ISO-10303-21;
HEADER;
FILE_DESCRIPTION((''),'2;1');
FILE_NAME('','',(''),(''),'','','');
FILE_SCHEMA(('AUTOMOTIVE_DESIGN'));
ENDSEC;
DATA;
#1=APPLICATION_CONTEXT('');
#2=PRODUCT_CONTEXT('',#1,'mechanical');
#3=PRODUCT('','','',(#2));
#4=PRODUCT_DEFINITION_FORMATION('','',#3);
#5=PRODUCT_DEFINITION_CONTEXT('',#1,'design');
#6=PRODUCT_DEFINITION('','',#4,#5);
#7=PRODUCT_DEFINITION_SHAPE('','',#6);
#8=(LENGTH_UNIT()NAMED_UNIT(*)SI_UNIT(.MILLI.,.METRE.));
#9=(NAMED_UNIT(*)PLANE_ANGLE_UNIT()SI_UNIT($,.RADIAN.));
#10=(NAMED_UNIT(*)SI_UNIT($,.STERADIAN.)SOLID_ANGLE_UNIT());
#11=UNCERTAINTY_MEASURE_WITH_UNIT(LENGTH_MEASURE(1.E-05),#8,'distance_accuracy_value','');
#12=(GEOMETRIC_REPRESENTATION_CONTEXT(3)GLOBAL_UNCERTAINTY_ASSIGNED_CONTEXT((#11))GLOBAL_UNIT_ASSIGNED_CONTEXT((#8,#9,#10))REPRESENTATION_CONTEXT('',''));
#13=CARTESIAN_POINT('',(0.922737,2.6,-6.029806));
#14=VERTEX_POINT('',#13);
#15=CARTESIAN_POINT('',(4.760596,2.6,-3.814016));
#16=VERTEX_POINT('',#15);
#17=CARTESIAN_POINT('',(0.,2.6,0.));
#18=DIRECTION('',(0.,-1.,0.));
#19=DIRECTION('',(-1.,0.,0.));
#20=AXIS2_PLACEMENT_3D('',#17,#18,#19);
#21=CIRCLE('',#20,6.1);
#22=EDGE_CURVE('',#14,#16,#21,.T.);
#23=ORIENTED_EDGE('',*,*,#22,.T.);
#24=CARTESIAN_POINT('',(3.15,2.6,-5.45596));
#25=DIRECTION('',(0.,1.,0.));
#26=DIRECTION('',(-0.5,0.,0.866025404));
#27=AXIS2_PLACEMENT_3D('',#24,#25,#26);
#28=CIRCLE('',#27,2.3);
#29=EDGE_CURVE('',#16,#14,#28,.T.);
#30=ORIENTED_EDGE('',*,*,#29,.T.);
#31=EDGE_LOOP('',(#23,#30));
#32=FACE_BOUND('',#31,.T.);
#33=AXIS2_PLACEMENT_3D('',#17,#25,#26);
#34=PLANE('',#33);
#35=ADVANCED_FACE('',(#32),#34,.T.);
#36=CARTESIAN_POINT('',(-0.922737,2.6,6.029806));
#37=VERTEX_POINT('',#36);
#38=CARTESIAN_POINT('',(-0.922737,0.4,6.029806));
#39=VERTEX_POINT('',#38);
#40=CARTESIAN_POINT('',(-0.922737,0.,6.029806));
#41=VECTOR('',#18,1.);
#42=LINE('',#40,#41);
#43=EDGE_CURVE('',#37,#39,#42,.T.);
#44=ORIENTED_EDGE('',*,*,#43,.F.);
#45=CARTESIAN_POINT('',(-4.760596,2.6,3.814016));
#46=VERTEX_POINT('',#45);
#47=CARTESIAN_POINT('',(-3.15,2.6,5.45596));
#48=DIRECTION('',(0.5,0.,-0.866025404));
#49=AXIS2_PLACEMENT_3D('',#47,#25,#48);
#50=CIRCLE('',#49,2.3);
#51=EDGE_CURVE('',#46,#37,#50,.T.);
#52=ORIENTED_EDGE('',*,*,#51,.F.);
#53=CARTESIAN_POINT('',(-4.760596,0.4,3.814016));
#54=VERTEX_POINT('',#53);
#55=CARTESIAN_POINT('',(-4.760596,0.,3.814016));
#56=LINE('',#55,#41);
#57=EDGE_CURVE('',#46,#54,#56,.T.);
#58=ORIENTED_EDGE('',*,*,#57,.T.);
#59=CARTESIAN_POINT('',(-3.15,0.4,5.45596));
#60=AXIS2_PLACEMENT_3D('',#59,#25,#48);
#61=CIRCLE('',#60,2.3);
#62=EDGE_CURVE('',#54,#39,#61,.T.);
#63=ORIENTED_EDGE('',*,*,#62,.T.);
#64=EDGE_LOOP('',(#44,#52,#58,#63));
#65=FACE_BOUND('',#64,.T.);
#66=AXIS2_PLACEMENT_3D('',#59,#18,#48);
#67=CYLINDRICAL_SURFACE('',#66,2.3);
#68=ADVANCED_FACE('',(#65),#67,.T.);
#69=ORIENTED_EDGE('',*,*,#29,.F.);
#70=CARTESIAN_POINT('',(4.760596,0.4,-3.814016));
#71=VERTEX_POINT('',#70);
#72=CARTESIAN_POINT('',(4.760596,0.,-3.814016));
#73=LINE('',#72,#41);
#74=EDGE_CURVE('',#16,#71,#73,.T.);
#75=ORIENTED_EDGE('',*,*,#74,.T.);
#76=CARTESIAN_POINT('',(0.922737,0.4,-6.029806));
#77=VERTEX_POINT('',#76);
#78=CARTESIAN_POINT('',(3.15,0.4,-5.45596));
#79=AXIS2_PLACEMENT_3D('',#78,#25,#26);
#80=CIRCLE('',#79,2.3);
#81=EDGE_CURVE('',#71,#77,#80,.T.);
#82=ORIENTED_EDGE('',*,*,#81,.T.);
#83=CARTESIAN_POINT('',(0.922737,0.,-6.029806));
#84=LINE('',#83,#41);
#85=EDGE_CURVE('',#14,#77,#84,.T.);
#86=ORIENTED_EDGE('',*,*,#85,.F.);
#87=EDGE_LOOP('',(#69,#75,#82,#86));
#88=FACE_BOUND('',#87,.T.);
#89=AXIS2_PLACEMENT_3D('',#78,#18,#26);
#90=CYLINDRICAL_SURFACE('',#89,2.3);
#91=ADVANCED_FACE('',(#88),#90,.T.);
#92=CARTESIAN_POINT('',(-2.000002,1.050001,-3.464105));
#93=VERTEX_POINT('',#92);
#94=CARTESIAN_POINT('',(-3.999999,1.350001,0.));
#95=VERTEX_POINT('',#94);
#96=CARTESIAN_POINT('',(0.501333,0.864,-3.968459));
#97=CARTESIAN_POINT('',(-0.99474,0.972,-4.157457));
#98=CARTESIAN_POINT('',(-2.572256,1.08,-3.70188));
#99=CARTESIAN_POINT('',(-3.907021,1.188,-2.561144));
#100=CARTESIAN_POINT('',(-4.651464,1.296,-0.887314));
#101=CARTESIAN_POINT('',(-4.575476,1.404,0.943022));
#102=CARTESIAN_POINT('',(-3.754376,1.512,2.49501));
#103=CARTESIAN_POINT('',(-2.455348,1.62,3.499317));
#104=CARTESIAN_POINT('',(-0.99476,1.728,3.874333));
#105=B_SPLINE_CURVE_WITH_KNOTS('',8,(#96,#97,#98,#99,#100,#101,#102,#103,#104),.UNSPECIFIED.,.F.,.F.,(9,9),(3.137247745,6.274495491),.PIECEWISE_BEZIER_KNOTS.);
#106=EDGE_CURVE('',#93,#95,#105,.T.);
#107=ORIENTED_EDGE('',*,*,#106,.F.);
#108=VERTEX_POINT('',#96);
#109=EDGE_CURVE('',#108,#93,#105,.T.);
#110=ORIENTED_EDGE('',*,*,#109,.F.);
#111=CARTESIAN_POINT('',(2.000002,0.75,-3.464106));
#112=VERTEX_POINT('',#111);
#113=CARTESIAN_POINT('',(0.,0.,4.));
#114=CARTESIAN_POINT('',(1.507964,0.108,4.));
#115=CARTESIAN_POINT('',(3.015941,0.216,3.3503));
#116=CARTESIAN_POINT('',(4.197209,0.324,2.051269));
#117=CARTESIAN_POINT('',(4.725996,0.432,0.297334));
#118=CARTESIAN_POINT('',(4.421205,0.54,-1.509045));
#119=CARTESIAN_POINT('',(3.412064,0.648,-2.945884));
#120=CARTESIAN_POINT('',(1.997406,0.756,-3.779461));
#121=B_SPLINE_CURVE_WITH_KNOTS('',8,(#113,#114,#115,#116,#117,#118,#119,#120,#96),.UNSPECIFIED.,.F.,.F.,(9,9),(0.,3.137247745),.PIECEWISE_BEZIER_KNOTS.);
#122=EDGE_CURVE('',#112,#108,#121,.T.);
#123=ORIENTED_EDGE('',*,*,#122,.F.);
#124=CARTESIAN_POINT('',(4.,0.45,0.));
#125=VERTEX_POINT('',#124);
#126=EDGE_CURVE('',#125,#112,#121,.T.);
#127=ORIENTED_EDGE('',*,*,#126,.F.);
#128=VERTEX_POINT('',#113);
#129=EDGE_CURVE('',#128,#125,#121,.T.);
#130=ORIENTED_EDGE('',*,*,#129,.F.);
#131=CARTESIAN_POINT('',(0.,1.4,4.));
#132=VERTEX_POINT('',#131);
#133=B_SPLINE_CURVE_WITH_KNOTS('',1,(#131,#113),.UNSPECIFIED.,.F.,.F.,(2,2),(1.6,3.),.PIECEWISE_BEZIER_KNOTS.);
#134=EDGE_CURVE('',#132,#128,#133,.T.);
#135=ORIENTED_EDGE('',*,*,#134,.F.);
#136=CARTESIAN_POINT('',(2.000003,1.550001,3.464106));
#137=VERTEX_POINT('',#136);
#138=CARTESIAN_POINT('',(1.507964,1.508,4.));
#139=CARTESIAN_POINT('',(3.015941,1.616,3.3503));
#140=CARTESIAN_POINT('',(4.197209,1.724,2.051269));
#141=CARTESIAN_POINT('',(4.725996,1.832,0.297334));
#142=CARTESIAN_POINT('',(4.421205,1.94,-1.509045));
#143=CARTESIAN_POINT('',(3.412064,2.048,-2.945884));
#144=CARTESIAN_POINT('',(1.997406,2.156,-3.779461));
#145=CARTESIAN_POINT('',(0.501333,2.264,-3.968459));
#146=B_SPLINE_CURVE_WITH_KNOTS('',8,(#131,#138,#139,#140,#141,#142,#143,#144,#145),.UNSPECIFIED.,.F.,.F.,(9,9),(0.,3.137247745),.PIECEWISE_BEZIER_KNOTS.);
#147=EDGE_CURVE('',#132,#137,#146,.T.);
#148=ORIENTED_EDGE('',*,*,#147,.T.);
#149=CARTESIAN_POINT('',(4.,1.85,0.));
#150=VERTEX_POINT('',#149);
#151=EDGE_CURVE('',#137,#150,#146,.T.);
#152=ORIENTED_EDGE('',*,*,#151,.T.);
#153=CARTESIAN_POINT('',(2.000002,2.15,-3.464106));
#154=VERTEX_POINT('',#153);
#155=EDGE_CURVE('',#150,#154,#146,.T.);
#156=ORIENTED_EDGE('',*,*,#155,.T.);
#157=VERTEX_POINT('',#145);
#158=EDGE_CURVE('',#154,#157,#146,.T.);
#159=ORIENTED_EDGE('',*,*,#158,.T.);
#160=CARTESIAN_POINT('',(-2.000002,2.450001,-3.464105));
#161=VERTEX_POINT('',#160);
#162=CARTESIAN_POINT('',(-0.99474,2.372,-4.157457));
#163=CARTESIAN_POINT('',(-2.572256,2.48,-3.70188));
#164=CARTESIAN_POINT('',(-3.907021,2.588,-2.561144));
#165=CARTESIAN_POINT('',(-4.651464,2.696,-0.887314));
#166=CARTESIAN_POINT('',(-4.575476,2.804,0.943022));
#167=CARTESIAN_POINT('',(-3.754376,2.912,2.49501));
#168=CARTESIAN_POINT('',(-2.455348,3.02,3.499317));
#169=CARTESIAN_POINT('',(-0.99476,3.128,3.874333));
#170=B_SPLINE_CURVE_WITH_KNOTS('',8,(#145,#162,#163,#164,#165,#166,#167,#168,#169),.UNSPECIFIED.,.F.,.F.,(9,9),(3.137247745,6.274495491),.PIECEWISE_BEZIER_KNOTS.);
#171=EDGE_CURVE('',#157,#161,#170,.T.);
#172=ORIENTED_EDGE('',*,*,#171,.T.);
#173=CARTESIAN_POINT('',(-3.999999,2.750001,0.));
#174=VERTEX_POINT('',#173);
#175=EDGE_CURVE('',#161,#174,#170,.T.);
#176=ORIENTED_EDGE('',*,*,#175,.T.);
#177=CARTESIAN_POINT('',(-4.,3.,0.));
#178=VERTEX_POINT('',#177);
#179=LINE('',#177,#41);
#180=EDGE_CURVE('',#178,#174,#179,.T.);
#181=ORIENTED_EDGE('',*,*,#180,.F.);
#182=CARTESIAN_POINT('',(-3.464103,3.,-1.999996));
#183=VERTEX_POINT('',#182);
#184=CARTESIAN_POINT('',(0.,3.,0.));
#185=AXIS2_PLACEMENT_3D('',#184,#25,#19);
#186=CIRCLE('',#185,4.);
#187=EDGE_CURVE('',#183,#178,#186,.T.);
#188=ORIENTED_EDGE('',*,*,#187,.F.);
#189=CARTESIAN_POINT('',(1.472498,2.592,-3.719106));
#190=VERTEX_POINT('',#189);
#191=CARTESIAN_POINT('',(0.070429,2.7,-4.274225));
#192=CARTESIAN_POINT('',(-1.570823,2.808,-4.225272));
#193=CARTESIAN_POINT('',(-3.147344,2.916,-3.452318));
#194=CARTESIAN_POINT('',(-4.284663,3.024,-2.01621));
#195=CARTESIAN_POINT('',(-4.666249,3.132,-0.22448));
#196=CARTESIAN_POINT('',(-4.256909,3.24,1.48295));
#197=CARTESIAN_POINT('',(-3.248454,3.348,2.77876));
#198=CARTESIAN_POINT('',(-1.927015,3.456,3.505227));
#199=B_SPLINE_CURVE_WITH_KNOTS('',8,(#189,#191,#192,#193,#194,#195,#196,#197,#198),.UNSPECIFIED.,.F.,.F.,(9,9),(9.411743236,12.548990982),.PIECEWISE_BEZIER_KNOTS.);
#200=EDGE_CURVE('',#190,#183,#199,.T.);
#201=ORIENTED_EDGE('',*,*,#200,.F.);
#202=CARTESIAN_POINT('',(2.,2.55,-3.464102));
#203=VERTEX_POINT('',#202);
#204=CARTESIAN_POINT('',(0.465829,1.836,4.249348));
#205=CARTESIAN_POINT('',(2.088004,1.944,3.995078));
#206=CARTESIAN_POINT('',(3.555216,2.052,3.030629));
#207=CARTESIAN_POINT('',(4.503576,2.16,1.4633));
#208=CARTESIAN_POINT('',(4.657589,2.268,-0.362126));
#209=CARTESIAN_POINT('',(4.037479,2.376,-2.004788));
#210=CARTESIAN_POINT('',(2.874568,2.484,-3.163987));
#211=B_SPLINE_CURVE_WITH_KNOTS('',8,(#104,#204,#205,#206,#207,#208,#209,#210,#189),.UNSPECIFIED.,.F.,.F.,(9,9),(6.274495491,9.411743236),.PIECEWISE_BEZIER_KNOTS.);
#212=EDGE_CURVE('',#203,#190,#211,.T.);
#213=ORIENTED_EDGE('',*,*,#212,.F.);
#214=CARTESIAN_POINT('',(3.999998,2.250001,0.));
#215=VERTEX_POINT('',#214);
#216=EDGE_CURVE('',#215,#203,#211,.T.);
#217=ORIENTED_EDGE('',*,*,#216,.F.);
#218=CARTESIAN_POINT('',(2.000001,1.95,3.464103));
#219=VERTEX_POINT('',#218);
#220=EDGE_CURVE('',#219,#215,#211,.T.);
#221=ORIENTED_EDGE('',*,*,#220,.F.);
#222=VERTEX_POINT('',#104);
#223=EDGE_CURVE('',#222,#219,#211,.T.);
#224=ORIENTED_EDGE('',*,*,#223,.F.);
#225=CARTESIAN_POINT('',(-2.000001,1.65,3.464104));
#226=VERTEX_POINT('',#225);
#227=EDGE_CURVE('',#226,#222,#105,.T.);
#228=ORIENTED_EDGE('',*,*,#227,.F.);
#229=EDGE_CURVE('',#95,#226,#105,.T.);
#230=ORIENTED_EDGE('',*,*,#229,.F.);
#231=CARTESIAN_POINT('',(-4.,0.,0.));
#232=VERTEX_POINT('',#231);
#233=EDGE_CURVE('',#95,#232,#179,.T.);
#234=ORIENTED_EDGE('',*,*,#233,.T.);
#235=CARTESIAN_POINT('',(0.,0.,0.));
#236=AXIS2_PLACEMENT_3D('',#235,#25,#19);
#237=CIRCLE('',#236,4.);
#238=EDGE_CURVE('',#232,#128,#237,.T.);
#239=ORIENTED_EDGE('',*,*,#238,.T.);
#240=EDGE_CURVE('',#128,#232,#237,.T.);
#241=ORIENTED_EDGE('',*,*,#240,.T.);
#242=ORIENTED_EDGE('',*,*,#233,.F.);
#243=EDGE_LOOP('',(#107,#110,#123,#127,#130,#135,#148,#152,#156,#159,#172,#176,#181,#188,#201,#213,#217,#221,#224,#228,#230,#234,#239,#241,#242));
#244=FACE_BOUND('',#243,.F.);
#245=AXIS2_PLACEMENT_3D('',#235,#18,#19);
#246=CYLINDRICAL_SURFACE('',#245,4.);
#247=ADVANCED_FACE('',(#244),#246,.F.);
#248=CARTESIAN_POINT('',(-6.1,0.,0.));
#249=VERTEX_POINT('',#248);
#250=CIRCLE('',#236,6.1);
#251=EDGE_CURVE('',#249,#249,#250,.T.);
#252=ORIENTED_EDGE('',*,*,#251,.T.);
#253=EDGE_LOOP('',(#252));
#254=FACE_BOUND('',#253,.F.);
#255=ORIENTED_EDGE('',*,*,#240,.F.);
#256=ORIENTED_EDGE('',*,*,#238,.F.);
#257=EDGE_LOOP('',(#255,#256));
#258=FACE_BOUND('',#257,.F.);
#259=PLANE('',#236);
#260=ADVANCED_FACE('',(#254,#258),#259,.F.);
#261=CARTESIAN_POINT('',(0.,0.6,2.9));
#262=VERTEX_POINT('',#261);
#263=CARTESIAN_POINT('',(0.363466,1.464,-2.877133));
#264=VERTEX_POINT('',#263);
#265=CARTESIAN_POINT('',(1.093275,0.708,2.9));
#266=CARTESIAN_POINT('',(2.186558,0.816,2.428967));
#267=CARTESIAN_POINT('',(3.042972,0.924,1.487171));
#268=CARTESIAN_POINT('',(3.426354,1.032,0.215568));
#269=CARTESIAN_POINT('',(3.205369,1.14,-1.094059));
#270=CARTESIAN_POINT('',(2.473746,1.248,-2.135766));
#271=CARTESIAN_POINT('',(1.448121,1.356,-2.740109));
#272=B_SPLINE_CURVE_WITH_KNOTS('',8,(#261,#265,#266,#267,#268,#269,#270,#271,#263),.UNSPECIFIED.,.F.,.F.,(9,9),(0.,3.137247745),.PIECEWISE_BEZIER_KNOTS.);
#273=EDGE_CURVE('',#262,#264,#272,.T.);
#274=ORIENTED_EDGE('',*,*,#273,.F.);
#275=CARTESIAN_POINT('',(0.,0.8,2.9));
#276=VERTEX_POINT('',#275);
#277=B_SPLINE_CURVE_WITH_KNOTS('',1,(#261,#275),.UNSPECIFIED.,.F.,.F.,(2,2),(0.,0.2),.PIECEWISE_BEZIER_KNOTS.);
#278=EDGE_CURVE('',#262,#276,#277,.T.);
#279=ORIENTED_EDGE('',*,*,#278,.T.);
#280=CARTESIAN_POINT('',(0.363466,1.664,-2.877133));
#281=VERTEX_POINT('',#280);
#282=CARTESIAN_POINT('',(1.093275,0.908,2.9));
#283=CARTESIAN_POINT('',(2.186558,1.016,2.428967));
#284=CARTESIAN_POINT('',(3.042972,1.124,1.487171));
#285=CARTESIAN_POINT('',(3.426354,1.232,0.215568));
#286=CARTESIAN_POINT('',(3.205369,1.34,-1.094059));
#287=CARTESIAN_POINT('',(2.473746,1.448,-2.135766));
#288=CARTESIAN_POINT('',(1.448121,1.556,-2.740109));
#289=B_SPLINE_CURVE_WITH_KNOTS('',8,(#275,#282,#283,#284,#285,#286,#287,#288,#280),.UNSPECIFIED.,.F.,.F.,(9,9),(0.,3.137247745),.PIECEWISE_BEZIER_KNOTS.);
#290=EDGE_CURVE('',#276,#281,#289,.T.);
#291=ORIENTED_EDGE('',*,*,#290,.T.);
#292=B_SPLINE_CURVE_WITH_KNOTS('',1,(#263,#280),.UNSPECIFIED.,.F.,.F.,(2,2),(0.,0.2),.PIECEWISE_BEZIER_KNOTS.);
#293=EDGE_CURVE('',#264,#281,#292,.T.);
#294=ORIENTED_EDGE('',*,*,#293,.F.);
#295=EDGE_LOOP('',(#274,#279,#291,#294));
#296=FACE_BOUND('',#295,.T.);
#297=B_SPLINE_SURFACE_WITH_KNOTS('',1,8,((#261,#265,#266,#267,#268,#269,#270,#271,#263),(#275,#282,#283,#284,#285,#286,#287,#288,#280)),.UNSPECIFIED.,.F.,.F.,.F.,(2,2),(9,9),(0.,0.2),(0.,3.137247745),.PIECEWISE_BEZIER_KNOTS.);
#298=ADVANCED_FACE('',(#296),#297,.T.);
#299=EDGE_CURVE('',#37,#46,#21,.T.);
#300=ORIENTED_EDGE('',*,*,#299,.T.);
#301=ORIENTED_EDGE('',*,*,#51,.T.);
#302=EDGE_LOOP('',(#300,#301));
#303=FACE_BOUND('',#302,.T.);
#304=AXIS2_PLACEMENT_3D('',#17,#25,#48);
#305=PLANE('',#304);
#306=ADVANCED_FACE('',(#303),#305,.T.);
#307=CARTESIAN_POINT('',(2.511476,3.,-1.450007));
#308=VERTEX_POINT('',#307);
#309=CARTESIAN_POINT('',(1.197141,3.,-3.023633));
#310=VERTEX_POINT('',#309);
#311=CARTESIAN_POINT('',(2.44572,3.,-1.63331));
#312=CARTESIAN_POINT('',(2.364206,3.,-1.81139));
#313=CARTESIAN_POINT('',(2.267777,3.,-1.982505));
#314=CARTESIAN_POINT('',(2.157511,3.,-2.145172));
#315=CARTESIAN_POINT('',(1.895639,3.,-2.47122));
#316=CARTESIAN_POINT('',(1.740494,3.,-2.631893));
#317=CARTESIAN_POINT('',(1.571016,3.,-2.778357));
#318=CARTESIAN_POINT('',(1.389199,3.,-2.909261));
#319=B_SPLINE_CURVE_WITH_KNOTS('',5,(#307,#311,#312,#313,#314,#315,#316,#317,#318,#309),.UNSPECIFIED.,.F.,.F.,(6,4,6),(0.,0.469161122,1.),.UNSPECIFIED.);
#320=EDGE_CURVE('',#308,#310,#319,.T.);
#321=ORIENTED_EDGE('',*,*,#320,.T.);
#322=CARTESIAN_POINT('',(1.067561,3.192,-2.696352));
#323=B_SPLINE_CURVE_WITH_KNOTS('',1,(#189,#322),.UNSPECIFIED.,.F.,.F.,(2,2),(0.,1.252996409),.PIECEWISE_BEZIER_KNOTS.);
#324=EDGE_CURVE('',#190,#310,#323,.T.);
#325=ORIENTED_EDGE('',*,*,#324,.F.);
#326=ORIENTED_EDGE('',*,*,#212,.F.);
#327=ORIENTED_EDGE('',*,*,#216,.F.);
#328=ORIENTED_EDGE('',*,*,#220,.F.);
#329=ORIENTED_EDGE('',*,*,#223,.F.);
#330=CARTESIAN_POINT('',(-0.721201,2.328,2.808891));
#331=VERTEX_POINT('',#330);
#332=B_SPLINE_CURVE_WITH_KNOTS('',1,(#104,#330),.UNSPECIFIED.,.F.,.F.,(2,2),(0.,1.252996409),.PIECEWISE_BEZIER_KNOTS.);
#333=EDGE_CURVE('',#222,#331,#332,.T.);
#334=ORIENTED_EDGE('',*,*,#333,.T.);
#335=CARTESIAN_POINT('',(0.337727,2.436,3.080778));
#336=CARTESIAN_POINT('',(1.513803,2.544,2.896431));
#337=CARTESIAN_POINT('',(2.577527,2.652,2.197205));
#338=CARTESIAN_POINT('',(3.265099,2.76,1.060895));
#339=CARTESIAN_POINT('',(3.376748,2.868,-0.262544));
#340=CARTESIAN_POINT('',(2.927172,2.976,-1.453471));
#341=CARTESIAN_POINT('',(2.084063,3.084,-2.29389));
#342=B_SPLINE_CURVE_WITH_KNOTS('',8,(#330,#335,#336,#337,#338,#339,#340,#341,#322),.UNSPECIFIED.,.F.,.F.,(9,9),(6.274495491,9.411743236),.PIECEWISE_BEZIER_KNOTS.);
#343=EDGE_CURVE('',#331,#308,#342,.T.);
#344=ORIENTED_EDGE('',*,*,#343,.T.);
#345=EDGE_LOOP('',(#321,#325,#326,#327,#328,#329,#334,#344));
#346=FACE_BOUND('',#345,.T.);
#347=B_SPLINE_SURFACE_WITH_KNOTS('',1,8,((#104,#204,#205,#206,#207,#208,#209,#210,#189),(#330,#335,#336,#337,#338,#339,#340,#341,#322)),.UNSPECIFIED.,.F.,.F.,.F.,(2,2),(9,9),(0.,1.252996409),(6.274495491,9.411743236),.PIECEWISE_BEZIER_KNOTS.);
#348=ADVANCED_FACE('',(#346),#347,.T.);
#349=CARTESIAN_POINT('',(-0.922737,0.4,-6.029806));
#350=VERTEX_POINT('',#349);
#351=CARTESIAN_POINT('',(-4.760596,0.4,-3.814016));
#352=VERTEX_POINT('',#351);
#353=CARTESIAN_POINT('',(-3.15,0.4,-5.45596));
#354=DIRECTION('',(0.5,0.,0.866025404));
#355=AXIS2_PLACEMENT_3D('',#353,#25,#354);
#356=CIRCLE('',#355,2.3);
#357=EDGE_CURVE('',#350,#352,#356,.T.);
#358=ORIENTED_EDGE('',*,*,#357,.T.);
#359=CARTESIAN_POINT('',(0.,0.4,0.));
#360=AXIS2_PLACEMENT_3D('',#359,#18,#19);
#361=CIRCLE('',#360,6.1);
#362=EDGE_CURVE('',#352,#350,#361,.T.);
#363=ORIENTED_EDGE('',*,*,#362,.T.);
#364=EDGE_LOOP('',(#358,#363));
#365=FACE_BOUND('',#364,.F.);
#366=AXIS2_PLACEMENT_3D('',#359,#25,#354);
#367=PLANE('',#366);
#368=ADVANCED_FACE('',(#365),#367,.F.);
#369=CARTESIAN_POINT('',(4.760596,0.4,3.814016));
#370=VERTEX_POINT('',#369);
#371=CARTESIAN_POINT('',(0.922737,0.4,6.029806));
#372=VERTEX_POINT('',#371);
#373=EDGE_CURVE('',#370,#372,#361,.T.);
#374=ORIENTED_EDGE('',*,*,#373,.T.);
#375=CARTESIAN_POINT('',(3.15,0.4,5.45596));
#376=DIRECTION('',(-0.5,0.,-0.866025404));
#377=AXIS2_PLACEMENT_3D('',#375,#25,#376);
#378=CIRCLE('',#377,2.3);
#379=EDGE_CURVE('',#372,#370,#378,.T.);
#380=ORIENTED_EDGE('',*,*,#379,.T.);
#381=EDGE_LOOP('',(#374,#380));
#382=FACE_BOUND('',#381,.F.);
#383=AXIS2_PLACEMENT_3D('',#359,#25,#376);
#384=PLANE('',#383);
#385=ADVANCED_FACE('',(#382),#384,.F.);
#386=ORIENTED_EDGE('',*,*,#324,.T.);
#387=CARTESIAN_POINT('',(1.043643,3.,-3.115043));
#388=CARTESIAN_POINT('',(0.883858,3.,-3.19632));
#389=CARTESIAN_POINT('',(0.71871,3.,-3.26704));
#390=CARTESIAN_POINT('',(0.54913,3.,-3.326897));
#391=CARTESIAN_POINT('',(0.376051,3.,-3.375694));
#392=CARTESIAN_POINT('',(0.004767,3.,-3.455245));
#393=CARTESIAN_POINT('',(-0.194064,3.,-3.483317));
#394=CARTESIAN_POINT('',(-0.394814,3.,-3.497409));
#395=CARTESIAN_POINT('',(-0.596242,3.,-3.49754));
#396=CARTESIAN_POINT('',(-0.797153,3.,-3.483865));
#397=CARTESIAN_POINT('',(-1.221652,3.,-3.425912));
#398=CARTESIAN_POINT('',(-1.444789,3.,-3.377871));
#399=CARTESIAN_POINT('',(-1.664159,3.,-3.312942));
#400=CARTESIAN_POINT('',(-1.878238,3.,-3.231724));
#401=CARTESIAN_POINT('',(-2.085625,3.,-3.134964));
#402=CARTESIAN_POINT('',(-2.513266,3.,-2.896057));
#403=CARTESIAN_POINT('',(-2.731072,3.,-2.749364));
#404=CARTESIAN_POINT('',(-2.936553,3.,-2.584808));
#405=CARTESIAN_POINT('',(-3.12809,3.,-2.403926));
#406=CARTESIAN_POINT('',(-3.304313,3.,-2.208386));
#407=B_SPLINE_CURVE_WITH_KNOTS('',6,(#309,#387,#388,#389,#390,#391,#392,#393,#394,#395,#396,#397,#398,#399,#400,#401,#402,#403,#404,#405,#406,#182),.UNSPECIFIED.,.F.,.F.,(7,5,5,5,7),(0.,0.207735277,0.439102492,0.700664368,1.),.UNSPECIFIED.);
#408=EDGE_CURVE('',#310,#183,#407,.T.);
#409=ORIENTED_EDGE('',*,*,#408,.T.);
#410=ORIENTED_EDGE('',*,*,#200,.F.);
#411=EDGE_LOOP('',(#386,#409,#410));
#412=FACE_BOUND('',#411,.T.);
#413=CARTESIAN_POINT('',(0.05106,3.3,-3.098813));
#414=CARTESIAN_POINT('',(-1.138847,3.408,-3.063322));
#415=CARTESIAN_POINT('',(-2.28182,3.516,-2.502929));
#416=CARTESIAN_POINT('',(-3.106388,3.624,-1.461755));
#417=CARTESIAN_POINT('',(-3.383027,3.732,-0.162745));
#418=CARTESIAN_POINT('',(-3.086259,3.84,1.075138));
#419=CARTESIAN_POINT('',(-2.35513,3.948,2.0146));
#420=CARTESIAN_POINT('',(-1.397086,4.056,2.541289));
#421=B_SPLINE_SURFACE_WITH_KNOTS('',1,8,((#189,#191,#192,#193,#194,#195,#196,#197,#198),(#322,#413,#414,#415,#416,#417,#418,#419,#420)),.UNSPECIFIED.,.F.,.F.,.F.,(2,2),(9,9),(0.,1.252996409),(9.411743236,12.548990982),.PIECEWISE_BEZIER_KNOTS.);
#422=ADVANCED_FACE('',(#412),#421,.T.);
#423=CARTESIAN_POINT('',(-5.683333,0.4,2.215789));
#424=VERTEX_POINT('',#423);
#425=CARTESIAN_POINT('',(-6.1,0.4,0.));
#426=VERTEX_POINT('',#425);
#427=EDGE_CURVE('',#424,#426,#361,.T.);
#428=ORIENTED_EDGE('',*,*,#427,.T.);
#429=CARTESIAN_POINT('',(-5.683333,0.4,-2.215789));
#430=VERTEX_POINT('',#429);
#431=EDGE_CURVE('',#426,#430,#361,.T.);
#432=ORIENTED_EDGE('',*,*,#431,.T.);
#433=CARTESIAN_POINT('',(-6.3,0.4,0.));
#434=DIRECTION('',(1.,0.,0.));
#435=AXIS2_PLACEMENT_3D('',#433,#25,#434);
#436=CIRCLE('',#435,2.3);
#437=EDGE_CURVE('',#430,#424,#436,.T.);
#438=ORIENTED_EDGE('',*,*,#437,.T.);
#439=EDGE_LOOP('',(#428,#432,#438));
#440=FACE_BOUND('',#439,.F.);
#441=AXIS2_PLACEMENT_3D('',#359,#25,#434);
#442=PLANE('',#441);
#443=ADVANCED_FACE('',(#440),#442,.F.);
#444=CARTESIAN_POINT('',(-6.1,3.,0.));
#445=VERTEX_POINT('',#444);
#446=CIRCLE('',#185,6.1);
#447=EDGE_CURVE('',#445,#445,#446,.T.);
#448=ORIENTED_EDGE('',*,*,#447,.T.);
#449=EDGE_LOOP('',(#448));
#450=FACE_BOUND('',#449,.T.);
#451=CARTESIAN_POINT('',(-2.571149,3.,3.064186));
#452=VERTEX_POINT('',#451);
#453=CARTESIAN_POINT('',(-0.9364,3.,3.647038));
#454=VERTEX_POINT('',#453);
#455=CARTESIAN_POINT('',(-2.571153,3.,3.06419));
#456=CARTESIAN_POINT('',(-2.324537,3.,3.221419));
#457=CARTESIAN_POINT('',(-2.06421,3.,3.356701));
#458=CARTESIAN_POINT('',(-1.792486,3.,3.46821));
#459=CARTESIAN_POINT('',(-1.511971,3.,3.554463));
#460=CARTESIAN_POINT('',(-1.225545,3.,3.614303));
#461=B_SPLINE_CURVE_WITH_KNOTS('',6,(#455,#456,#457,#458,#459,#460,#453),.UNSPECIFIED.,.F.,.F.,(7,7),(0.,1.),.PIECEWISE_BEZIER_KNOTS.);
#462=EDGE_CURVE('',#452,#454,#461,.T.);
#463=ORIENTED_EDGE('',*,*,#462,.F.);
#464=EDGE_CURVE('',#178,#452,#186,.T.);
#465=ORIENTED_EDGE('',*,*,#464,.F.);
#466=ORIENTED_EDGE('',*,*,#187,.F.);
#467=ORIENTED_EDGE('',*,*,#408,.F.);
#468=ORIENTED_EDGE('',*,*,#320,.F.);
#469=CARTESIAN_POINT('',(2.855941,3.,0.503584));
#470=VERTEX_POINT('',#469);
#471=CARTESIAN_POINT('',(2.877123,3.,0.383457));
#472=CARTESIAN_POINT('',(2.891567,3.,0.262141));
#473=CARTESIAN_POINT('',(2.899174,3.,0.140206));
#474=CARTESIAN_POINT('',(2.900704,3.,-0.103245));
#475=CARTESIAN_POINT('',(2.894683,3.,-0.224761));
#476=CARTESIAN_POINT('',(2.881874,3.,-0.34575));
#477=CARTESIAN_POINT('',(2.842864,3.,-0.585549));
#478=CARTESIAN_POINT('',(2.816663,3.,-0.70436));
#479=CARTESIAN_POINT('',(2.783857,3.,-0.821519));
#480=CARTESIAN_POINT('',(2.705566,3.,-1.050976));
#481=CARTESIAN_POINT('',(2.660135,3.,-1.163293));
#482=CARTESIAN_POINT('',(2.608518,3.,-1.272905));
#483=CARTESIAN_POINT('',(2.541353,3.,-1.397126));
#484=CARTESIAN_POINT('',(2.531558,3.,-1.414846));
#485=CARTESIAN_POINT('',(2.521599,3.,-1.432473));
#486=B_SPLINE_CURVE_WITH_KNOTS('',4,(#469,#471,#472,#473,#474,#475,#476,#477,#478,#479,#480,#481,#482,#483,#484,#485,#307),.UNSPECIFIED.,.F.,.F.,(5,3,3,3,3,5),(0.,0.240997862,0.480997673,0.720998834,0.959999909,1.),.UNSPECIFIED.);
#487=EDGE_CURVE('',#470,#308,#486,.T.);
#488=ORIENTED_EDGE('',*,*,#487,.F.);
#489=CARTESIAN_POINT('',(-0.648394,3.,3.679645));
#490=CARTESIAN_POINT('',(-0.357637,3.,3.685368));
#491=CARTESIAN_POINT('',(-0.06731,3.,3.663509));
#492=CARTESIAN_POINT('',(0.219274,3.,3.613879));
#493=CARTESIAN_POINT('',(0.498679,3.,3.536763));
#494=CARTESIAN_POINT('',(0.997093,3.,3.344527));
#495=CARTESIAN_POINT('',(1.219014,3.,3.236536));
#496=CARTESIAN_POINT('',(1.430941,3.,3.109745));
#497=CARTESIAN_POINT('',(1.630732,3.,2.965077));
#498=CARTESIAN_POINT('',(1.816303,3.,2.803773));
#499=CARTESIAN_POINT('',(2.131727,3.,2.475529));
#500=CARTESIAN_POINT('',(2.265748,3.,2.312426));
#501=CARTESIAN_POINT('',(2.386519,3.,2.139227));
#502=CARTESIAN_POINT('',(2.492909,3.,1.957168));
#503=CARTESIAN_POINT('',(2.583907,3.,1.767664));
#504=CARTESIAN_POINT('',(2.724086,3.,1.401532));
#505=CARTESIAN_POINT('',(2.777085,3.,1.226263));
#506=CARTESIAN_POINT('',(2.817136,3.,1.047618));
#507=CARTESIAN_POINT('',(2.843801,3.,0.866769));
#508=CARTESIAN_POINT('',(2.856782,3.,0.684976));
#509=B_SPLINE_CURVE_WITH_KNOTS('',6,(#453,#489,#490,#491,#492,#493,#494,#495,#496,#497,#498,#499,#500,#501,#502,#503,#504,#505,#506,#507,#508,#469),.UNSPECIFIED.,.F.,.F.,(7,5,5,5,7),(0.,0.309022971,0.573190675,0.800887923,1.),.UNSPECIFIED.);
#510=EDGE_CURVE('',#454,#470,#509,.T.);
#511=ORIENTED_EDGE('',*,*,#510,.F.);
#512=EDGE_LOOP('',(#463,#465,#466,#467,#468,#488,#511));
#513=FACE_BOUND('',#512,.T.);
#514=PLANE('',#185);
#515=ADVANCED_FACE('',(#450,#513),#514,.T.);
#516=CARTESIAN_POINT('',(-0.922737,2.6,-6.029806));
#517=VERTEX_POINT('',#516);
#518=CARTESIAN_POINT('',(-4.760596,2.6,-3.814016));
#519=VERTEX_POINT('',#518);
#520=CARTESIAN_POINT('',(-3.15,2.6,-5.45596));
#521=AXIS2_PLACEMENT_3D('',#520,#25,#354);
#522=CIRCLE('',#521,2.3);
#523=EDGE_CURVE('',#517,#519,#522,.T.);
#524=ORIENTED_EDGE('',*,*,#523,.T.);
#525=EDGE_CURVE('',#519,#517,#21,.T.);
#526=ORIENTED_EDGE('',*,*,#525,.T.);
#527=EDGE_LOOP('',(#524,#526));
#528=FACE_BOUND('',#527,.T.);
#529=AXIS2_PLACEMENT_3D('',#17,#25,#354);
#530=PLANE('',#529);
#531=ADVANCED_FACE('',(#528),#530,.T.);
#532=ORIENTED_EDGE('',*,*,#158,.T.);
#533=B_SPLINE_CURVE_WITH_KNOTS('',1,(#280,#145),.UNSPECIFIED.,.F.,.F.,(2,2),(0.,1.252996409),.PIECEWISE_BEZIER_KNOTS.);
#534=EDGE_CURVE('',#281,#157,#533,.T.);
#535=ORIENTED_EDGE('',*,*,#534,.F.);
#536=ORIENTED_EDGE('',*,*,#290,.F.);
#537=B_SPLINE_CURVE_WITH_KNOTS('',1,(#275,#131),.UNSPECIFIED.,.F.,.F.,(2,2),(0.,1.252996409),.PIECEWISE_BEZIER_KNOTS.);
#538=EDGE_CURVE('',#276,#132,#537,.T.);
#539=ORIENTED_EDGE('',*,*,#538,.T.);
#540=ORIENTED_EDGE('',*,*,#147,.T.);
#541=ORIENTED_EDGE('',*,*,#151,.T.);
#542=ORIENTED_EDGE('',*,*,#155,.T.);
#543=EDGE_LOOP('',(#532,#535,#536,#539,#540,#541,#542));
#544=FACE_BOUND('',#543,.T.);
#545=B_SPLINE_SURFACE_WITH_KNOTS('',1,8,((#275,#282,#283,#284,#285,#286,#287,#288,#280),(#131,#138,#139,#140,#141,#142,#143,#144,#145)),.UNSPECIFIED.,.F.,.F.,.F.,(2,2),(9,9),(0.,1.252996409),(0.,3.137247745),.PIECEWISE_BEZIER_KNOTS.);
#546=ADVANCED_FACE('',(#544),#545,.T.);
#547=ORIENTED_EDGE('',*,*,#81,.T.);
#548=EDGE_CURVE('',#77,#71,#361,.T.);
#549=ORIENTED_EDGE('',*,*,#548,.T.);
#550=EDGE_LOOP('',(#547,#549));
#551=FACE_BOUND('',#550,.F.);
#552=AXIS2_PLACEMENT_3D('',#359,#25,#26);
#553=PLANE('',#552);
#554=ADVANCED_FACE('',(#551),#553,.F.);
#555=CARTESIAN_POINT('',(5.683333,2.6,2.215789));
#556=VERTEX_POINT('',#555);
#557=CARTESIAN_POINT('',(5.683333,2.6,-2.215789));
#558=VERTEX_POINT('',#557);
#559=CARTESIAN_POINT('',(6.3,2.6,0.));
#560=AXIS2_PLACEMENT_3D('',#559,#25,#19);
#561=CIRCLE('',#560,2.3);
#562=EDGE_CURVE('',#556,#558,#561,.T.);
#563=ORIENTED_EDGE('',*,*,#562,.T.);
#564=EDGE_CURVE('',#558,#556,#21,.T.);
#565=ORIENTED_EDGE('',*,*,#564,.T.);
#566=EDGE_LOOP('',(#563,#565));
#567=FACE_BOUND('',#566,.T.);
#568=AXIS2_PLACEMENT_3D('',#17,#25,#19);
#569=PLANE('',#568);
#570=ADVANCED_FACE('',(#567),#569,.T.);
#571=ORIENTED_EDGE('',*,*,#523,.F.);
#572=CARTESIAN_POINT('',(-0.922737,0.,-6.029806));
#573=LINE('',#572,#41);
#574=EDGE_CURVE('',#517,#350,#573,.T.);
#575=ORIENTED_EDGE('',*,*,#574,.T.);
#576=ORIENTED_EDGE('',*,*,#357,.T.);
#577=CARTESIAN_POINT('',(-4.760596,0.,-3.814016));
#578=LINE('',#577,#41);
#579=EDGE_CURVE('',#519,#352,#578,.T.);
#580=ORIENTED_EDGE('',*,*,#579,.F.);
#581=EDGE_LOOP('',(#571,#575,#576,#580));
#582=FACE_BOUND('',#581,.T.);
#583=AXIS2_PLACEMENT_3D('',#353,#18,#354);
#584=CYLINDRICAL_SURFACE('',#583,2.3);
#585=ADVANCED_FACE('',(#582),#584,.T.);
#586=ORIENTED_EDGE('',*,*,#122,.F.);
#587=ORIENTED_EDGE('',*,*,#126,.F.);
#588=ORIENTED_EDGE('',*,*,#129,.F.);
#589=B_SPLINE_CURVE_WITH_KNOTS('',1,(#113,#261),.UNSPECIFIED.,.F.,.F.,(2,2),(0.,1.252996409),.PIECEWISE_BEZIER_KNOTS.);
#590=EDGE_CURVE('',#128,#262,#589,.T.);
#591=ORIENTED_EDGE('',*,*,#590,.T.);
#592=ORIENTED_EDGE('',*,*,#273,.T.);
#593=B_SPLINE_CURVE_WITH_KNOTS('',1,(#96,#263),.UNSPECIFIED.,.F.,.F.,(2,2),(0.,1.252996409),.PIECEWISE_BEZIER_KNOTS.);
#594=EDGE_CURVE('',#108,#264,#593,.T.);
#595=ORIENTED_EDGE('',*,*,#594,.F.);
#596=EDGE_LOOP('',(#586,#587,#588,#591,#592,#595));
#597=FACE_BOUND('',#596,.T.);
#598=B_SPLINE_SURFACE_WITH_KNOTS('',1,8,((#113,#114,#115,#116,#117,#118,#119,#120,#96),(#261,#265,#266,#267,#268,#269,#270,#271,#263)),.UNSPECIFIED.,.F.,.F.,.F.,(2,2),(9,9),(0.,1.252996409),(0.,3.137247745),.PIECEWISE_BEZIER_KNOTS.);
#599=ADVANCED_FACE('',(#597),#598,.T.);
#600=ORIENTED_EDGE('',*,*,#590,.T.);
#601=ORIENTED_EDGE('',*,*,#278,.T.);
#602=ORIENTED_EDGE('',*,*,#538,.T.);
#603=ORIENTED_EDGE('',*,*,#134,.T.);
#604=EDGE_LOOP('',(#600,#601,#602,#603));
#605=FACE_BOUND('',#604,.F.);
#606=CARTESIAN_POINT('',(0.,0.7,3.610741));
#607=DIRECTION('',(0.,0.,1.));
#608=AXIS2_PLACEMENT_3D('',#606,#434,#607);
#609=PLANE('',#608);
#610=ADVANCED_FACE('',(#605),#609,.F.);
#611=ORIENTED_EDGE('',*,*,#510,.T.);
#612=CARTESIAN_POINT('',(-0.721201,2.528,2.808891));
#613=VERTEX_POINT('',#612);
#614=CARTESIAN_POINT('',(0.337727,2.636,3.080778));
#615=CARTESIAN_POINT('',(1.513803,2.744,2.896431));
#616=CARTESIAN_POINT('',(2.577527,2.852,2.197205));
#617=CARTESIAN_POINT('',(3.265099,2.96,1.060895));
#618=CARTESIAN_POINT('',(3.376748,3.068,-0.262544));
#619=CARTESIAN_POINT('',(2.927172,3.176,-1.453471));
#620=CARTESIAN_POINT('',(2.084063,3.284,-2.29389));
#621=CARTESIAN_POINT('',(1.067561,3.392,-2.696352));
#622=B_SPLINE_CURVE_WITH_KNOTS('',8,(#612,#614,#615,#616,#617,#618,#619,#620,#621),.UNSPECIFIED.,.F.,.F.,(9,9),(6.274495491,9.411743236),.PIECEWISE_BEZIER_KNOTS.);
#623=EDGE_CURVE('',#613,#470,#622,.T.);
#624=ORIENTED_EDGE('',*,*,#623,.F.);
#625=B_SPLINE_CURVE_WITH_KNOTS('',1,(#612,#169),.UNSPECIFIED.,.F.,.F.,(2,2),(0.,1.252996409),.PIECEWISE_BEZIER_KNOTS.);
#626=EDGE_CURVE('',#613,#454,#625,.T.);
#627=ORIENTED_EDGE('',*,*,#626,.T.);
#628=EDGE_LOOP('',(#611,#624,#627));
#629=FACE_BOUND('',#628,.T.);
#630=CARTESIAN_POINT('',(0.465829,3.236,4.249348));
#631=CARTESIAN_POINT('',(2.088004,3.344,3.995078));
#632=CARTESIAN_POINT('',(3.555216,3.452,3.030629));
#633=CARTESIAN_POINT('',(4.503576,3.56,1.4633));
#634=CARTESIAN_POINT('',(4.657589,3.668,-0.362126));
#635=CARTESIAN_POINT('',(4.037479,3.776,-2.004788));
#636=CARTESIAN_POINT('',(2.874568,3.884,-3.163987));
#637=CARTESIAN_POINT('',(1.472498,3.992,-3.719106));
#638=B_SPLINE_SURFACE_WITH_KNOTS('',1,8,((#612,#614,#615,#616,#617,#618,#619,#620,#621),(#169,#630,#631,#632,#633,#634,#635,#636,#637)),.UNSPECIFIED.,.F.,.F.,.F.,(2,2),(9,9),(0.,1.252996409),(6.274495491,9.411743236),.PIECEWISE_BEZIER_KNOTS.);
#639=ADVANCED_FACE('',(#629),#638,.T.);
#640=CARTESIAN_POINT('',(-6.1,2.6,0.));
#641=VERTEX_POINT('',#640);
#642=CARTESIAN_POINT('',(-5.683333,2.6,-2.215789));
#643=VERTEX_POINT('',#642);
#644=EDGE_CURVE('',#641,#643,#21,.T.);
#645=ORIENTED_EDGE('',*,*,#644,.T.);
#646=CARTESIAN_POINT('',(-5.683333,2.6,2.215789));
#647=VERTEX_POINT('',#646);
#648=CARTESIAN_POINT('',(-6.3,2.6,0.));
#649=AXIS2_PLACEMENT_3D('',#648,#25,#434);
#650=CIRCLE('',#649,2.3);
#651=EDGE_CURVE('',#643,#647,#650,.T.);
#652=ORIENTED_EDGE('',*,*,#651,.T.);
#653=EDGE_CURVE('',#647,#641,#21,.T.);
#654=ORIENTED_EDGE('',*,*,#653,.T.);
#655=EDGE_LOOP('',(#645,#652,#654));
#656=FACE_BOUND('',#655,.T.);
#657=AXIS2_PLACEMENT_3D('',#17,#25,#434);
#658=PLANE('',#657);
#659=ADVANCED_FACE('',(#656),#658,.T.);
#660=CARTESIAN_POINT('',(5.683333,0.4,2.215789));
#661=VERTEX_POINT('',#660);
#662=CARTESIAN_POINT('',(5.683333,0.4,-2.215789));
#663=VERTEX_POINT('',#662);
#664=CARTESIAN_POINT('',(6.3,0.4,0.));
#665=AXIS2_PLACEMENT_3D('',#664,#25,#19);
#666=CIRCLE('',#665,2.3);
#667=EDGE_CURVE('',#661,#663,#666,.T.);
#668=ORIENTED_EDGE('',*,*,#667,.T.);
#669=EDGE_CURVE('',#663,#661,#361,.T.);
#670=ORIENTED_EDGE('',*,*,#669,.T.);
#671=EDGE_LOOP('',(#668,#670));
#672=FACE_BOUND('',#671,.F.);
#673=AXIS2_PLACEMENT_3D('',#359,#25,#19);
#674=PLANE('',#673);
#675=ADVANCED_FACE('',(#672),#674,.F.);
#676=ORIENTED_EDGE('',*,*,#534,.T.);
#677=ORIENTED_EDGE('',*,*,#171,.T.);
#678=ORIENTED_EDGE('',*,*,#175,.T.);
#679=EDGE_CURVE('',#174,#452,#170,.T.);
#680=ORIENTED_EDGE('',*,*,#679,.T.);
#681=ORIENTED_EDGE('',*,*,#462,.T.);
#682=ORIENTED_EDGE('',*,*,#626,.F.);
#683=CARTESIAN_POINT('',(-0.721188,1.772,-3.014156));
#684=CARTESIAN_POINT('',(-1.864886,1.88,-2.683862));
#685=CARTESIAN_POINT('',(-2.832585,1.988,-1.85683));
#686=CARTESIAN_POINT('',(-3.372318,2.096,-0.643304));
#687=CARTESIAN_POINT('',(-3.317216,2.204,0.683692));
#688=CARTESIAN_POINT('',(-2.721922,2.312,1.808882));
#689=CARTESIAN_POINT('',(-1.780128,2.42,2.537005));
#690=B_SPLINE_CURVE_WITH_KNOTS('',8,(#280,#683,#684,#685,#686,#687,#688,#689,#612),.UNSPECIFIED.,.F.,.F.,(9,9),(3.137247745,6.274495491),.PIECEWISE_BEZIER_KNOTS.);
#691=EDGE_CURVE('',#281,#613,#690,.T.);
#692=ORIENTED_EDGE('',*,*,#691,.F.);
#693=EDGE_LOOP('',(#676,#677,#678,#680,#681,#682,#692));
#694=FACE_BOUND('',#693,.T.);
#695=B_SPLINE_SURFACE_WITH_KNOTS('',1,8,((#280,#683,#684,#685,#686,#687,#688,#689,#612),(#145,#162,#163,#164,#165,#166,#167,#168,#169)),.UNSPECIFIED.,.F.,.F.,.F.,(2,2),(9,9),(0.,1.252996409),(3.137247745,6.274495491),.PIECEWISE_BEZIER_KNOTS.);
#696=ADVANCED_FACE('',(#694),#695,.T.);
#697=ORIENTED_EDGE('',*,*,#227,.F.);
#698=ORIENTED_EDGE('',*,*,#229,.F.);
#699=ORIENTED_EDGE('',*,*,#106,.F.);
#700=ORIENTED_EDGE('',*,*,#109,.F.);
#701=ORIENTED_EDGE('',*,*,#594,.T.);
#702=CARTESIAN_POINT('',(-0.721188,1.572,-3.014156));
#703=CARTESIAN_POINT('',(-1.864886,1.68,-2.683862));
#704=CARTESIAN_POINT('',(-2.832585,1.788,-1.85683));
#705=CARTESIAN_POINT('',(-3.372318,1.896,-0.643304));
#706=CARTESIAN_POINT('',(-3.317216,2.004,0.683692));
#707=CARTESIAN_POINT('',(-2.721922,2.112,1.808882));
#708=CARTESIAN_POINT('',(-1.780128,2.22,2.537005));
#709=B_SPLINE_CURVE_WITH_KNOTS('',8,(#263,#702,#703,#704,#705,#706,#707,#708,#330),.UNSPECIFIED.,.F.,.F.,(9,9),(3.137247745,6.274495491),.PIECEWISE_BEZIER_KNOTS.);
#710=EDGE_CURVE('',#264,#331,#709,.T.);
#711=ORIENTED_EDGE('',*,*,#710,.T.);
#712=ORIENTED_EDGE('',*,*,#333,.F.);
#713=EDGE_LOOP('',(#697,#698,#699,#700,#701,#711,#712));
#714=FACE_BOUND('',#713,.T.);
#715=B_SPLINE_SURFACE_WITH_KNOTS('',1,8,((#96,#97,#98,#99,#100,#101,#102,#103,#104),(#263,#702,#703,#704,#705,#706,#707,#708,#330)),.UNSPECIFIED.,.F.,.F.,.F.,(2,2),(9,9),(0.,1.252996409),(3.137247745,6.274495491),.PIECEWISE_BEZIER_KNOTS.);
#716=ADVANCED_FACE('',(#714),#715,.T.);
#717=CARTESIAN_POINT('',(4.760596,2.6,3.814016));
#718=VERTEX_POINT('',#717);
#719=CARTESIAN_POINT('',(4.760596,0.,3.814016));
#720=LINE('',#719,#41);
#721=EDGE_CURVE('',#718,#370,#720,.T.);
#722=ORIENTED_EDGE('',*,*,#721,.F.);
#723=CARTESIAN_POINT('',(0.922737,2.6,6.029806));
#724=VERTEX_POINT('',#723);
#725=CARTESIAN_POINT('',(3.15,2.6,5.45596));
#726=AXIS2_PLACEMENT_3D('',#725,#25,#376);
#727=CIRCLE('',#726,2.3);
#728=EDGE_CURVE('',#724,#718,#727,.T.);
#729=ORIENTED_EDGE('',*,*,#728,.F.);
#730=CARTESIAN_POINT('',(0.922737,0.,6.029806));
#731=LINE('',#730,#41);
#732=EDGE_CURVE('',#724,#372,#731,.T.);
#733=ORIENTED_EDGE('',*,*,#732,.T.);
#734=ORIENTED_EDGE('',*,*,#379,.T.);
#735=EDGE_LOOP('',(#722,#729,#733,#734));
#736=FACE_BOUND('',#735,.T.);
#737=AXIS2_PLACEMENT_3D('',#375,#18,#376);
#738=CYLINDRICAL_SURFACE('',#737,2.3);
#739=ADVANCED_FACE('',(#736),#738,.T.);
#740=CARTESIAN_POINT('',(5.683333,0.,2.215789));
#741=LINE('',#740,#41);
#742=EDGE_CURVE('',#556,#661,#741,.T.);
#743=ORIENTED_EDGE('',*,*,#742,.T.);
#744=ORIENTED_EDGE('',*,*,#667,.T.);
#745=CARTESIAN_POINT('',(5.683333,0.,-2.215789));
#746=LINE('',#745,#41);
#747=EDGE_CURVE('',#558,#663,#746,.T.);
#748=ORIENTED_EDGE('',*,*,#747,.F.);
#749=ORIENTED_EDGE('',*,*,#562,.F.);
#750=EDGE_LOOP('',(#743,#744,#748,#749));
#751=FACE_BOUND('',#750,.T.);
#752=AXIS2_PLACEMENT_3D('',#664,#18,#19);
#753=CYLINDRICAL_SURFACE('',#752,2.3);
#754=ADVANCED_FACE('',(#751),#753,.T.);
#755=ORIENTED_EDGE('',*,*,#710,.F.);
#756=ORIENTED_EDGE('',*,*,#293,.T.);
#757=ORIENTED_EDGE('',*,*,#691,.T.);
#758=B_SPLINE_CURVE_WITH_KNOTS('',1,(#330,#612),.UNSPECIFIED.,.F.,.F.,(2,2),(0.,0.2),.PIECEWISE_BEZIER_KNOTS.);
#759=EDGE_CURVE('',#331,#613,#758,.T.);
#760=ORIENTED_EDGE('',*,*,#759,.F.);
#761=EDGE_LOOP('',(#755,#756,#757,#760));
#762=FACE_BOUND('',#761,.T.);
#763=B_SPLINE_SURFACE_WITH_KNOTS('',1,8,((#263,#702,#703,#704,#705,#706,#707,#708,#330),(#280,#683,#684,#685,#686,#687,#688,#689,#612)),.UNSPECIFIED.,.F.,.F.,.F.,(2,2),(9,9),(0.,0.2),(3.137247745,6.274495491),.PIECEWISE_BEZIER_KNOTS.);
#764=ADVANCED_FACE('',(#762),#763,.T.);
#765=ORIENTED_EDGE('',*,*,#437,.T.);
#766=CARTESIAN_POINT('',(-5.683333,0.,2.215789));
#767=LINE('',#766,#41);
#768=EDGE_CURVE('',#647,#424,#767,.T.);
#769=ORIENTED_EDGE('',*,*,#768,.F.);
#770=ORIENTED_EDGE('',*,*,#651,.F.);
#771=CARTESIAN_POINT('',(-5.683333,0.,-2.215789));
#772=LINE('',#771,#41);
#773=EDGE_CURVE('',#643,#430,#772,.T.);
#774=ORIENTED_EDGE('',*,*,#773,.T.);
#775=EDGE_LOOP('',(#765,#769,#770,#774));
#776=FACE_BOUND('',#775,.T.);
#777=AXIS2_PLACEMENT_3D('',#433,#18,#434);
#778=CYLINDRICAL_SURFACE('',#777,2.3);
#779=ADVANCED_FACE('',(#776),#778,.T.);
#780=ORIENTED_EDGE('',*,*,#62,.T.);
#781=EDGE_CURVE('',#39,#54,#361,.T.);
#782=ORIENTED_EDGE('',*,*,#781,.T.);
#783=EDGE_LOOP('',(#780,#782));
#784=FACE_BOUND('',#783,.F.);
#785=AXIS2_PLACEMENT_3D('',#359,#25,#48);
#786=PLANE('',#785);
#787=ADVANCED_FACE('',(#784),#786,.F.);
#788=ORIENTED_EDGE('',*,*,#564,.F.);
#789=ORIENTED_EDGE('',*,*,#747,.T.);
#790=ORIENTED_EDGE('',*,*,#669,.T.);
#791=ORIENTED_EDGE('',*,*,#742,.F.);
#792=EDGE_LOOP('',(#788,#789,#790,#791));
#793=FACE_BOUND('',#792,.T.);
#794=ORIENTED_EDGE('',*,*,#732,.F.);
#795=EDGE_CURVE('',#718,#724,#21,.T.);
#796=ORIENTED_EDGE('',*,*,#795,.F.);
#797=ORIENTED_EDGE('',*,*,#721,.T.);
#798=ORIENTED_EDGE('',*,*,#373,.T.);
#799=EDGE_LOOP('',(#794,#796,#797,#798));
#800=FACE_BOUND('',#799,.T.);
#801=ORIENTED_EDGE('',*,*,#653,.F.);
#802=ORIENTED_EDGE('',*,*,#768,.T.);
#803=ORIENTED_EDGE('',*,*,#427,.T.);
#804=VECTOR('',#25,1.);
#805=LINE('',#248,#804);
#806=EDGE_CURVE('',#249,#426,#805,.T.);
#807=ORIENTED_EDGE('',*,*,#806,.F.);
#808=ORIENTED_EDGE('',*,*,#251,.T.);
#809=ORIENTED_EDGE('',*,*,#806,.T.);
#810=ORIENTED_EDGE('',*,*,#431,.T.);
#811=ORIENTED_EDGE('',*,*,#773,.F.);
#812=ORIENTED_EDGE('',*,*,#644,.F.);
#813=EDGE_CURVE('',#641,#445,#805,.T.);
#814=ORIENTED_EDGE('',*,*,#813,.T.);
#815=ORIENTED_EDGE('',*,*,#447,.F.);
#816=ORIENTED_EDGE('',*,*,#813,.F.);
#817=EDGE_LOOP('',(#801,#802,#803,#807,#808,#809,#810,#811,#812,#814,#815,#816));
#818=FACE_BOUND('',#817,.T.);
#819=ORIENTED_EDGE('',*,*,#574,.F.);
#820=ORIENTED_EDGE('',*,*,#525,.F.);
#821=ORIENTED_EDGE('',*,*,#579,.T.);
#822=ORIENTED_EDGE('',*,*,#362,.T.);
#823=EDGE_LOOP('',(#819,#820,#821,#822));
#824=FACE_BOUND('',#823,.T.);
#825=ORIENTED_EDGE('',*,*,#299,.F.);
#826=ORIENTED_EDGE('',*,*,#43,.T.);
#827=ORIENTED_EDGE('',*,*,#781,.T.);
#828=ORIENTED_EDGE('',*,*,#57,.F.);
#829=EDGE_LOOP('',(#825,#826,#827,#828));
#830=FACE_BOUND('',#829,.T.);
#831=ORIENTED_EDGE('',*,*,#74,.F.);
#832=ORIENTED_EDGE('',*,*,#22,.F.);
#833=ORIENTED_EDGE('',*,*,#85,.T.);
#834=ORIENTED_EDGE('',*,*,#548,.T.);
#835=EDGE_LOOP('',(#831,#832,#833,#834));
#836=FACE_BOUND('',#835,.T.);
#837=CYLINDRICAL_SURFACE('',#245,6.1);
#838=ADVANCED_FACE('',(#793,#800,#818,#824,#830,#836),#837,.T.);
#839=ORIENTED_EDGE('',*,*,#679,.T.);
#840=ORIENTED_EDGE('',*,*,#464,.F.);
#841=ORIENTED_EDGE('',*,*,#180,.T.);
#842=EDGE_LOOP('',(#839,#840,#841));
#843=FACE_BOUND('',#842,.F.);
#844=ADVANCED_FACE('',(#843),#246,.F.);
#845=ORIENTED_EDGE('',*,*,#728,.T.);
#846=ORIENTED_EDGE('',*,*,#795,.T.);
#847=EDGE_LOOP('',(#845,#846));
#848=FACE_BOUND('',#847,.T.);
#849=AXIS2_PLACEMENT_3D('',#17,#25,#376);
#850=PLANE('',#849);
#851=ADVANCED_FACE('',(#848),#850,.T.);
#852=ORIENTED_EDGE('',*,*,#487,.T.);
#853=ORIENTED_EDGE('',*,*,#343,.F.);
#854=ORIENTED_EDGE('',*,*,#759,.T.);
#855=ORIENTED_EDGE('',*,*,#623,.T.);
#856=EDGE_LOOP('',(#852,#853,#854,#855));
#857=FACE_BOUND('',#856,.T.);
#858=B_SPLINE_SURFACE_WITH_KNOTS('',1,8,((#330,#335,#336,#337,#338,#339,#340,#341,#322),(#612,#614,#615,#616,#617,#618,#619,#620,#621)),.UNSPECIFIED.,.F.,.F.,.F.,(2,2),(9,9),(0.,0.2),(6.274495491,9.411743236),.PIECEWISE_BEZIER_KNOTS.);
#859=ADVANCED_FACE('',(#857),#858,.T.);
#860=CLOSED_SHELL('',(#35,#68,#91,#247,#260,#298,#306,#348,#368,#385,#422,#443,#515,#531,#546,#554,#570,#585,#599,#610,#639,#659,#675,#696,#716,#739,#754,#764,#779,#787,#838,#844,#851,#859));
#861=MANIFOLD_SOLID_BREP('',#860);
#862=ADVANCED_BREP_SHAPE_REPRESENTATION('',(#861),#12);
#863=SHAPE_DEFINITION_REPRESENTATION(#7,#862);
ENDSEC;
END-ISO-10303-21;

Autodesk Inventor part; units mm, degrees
sketch "Sketch1" plane through (0, 0, 0) normal (0, 1, 0) x (-1, 0, 0)
  circle A0 centre (0, 0) radius 6.1
  circle A1 centre (0, 0) radius 4
  dimension "d0" = 12.2
  dimension "d1" = 8
extrude "Extrusion1" add sketch "Sketch1" along normal blind 3
ref_plane "Work Plane1" through (0, 0.4, 0) normal (0, 1, 0) x (-1, 0, 0)
sketch "Sketch2" plane through (0, 0.4, 0) normal (0, 1, 0) x (-1, 0, 0)
  circle A0 centre (0, 0) radius 8.6 construction
  circle A1 centre (-6.3, 0) radius 2.3
  circle A2 centre (0, 0) radius 4 projected
  dimension "d5" = 17.2
extrude "Extrusion2" add sketch "Sketch2" along normal blind 2.2 contours A1
pattern_circular "Circular Pattern1" count 6 over 360 about axis through (0, -10, 0) along (0, 1, 0) of "Extrusion2"
sketch "Sketch3" plane through (0, 0, 0) normal (1, 0, 0) x (0, 1, 0)
  line L0 (3, 4) -> (0, 4) projected
  line L1 (0, 4) -> (0.6, 2.9)
  line L2 (0, -6.1) -> (0, 6.1) projected
  line L3 (0, 8.54) -> (0, -8.54) projected
  line L4 (0.6, 2.9) -> (0.8, 2.9)
  line L5 (0.8, 2.9) -> (1.4, 4)
  line L6 (1.4, 4) -> (0, 4)
  point P0 (0, 0)
  dimension "d12" = 0.2
  dimension "d13" = 1.1
  dimension "d14" = 1.4
coil "Coil1" sketch "Sketch3" operation add axis through (0, -10, 0) along (0, 1, 0) pitch 1.8 turns 2.4 hand right
sketch "Sketch4" plane through (0, 3, 0) normal (0, 1, 0) x (1, 0, 0)
  circle A0 centre (0, 0) radius 6.1
extrude "Extrusion3" cut sketch "Sketch4" along normal blind 10
properties part number "bearing-clamp" material "PET Plastic"
